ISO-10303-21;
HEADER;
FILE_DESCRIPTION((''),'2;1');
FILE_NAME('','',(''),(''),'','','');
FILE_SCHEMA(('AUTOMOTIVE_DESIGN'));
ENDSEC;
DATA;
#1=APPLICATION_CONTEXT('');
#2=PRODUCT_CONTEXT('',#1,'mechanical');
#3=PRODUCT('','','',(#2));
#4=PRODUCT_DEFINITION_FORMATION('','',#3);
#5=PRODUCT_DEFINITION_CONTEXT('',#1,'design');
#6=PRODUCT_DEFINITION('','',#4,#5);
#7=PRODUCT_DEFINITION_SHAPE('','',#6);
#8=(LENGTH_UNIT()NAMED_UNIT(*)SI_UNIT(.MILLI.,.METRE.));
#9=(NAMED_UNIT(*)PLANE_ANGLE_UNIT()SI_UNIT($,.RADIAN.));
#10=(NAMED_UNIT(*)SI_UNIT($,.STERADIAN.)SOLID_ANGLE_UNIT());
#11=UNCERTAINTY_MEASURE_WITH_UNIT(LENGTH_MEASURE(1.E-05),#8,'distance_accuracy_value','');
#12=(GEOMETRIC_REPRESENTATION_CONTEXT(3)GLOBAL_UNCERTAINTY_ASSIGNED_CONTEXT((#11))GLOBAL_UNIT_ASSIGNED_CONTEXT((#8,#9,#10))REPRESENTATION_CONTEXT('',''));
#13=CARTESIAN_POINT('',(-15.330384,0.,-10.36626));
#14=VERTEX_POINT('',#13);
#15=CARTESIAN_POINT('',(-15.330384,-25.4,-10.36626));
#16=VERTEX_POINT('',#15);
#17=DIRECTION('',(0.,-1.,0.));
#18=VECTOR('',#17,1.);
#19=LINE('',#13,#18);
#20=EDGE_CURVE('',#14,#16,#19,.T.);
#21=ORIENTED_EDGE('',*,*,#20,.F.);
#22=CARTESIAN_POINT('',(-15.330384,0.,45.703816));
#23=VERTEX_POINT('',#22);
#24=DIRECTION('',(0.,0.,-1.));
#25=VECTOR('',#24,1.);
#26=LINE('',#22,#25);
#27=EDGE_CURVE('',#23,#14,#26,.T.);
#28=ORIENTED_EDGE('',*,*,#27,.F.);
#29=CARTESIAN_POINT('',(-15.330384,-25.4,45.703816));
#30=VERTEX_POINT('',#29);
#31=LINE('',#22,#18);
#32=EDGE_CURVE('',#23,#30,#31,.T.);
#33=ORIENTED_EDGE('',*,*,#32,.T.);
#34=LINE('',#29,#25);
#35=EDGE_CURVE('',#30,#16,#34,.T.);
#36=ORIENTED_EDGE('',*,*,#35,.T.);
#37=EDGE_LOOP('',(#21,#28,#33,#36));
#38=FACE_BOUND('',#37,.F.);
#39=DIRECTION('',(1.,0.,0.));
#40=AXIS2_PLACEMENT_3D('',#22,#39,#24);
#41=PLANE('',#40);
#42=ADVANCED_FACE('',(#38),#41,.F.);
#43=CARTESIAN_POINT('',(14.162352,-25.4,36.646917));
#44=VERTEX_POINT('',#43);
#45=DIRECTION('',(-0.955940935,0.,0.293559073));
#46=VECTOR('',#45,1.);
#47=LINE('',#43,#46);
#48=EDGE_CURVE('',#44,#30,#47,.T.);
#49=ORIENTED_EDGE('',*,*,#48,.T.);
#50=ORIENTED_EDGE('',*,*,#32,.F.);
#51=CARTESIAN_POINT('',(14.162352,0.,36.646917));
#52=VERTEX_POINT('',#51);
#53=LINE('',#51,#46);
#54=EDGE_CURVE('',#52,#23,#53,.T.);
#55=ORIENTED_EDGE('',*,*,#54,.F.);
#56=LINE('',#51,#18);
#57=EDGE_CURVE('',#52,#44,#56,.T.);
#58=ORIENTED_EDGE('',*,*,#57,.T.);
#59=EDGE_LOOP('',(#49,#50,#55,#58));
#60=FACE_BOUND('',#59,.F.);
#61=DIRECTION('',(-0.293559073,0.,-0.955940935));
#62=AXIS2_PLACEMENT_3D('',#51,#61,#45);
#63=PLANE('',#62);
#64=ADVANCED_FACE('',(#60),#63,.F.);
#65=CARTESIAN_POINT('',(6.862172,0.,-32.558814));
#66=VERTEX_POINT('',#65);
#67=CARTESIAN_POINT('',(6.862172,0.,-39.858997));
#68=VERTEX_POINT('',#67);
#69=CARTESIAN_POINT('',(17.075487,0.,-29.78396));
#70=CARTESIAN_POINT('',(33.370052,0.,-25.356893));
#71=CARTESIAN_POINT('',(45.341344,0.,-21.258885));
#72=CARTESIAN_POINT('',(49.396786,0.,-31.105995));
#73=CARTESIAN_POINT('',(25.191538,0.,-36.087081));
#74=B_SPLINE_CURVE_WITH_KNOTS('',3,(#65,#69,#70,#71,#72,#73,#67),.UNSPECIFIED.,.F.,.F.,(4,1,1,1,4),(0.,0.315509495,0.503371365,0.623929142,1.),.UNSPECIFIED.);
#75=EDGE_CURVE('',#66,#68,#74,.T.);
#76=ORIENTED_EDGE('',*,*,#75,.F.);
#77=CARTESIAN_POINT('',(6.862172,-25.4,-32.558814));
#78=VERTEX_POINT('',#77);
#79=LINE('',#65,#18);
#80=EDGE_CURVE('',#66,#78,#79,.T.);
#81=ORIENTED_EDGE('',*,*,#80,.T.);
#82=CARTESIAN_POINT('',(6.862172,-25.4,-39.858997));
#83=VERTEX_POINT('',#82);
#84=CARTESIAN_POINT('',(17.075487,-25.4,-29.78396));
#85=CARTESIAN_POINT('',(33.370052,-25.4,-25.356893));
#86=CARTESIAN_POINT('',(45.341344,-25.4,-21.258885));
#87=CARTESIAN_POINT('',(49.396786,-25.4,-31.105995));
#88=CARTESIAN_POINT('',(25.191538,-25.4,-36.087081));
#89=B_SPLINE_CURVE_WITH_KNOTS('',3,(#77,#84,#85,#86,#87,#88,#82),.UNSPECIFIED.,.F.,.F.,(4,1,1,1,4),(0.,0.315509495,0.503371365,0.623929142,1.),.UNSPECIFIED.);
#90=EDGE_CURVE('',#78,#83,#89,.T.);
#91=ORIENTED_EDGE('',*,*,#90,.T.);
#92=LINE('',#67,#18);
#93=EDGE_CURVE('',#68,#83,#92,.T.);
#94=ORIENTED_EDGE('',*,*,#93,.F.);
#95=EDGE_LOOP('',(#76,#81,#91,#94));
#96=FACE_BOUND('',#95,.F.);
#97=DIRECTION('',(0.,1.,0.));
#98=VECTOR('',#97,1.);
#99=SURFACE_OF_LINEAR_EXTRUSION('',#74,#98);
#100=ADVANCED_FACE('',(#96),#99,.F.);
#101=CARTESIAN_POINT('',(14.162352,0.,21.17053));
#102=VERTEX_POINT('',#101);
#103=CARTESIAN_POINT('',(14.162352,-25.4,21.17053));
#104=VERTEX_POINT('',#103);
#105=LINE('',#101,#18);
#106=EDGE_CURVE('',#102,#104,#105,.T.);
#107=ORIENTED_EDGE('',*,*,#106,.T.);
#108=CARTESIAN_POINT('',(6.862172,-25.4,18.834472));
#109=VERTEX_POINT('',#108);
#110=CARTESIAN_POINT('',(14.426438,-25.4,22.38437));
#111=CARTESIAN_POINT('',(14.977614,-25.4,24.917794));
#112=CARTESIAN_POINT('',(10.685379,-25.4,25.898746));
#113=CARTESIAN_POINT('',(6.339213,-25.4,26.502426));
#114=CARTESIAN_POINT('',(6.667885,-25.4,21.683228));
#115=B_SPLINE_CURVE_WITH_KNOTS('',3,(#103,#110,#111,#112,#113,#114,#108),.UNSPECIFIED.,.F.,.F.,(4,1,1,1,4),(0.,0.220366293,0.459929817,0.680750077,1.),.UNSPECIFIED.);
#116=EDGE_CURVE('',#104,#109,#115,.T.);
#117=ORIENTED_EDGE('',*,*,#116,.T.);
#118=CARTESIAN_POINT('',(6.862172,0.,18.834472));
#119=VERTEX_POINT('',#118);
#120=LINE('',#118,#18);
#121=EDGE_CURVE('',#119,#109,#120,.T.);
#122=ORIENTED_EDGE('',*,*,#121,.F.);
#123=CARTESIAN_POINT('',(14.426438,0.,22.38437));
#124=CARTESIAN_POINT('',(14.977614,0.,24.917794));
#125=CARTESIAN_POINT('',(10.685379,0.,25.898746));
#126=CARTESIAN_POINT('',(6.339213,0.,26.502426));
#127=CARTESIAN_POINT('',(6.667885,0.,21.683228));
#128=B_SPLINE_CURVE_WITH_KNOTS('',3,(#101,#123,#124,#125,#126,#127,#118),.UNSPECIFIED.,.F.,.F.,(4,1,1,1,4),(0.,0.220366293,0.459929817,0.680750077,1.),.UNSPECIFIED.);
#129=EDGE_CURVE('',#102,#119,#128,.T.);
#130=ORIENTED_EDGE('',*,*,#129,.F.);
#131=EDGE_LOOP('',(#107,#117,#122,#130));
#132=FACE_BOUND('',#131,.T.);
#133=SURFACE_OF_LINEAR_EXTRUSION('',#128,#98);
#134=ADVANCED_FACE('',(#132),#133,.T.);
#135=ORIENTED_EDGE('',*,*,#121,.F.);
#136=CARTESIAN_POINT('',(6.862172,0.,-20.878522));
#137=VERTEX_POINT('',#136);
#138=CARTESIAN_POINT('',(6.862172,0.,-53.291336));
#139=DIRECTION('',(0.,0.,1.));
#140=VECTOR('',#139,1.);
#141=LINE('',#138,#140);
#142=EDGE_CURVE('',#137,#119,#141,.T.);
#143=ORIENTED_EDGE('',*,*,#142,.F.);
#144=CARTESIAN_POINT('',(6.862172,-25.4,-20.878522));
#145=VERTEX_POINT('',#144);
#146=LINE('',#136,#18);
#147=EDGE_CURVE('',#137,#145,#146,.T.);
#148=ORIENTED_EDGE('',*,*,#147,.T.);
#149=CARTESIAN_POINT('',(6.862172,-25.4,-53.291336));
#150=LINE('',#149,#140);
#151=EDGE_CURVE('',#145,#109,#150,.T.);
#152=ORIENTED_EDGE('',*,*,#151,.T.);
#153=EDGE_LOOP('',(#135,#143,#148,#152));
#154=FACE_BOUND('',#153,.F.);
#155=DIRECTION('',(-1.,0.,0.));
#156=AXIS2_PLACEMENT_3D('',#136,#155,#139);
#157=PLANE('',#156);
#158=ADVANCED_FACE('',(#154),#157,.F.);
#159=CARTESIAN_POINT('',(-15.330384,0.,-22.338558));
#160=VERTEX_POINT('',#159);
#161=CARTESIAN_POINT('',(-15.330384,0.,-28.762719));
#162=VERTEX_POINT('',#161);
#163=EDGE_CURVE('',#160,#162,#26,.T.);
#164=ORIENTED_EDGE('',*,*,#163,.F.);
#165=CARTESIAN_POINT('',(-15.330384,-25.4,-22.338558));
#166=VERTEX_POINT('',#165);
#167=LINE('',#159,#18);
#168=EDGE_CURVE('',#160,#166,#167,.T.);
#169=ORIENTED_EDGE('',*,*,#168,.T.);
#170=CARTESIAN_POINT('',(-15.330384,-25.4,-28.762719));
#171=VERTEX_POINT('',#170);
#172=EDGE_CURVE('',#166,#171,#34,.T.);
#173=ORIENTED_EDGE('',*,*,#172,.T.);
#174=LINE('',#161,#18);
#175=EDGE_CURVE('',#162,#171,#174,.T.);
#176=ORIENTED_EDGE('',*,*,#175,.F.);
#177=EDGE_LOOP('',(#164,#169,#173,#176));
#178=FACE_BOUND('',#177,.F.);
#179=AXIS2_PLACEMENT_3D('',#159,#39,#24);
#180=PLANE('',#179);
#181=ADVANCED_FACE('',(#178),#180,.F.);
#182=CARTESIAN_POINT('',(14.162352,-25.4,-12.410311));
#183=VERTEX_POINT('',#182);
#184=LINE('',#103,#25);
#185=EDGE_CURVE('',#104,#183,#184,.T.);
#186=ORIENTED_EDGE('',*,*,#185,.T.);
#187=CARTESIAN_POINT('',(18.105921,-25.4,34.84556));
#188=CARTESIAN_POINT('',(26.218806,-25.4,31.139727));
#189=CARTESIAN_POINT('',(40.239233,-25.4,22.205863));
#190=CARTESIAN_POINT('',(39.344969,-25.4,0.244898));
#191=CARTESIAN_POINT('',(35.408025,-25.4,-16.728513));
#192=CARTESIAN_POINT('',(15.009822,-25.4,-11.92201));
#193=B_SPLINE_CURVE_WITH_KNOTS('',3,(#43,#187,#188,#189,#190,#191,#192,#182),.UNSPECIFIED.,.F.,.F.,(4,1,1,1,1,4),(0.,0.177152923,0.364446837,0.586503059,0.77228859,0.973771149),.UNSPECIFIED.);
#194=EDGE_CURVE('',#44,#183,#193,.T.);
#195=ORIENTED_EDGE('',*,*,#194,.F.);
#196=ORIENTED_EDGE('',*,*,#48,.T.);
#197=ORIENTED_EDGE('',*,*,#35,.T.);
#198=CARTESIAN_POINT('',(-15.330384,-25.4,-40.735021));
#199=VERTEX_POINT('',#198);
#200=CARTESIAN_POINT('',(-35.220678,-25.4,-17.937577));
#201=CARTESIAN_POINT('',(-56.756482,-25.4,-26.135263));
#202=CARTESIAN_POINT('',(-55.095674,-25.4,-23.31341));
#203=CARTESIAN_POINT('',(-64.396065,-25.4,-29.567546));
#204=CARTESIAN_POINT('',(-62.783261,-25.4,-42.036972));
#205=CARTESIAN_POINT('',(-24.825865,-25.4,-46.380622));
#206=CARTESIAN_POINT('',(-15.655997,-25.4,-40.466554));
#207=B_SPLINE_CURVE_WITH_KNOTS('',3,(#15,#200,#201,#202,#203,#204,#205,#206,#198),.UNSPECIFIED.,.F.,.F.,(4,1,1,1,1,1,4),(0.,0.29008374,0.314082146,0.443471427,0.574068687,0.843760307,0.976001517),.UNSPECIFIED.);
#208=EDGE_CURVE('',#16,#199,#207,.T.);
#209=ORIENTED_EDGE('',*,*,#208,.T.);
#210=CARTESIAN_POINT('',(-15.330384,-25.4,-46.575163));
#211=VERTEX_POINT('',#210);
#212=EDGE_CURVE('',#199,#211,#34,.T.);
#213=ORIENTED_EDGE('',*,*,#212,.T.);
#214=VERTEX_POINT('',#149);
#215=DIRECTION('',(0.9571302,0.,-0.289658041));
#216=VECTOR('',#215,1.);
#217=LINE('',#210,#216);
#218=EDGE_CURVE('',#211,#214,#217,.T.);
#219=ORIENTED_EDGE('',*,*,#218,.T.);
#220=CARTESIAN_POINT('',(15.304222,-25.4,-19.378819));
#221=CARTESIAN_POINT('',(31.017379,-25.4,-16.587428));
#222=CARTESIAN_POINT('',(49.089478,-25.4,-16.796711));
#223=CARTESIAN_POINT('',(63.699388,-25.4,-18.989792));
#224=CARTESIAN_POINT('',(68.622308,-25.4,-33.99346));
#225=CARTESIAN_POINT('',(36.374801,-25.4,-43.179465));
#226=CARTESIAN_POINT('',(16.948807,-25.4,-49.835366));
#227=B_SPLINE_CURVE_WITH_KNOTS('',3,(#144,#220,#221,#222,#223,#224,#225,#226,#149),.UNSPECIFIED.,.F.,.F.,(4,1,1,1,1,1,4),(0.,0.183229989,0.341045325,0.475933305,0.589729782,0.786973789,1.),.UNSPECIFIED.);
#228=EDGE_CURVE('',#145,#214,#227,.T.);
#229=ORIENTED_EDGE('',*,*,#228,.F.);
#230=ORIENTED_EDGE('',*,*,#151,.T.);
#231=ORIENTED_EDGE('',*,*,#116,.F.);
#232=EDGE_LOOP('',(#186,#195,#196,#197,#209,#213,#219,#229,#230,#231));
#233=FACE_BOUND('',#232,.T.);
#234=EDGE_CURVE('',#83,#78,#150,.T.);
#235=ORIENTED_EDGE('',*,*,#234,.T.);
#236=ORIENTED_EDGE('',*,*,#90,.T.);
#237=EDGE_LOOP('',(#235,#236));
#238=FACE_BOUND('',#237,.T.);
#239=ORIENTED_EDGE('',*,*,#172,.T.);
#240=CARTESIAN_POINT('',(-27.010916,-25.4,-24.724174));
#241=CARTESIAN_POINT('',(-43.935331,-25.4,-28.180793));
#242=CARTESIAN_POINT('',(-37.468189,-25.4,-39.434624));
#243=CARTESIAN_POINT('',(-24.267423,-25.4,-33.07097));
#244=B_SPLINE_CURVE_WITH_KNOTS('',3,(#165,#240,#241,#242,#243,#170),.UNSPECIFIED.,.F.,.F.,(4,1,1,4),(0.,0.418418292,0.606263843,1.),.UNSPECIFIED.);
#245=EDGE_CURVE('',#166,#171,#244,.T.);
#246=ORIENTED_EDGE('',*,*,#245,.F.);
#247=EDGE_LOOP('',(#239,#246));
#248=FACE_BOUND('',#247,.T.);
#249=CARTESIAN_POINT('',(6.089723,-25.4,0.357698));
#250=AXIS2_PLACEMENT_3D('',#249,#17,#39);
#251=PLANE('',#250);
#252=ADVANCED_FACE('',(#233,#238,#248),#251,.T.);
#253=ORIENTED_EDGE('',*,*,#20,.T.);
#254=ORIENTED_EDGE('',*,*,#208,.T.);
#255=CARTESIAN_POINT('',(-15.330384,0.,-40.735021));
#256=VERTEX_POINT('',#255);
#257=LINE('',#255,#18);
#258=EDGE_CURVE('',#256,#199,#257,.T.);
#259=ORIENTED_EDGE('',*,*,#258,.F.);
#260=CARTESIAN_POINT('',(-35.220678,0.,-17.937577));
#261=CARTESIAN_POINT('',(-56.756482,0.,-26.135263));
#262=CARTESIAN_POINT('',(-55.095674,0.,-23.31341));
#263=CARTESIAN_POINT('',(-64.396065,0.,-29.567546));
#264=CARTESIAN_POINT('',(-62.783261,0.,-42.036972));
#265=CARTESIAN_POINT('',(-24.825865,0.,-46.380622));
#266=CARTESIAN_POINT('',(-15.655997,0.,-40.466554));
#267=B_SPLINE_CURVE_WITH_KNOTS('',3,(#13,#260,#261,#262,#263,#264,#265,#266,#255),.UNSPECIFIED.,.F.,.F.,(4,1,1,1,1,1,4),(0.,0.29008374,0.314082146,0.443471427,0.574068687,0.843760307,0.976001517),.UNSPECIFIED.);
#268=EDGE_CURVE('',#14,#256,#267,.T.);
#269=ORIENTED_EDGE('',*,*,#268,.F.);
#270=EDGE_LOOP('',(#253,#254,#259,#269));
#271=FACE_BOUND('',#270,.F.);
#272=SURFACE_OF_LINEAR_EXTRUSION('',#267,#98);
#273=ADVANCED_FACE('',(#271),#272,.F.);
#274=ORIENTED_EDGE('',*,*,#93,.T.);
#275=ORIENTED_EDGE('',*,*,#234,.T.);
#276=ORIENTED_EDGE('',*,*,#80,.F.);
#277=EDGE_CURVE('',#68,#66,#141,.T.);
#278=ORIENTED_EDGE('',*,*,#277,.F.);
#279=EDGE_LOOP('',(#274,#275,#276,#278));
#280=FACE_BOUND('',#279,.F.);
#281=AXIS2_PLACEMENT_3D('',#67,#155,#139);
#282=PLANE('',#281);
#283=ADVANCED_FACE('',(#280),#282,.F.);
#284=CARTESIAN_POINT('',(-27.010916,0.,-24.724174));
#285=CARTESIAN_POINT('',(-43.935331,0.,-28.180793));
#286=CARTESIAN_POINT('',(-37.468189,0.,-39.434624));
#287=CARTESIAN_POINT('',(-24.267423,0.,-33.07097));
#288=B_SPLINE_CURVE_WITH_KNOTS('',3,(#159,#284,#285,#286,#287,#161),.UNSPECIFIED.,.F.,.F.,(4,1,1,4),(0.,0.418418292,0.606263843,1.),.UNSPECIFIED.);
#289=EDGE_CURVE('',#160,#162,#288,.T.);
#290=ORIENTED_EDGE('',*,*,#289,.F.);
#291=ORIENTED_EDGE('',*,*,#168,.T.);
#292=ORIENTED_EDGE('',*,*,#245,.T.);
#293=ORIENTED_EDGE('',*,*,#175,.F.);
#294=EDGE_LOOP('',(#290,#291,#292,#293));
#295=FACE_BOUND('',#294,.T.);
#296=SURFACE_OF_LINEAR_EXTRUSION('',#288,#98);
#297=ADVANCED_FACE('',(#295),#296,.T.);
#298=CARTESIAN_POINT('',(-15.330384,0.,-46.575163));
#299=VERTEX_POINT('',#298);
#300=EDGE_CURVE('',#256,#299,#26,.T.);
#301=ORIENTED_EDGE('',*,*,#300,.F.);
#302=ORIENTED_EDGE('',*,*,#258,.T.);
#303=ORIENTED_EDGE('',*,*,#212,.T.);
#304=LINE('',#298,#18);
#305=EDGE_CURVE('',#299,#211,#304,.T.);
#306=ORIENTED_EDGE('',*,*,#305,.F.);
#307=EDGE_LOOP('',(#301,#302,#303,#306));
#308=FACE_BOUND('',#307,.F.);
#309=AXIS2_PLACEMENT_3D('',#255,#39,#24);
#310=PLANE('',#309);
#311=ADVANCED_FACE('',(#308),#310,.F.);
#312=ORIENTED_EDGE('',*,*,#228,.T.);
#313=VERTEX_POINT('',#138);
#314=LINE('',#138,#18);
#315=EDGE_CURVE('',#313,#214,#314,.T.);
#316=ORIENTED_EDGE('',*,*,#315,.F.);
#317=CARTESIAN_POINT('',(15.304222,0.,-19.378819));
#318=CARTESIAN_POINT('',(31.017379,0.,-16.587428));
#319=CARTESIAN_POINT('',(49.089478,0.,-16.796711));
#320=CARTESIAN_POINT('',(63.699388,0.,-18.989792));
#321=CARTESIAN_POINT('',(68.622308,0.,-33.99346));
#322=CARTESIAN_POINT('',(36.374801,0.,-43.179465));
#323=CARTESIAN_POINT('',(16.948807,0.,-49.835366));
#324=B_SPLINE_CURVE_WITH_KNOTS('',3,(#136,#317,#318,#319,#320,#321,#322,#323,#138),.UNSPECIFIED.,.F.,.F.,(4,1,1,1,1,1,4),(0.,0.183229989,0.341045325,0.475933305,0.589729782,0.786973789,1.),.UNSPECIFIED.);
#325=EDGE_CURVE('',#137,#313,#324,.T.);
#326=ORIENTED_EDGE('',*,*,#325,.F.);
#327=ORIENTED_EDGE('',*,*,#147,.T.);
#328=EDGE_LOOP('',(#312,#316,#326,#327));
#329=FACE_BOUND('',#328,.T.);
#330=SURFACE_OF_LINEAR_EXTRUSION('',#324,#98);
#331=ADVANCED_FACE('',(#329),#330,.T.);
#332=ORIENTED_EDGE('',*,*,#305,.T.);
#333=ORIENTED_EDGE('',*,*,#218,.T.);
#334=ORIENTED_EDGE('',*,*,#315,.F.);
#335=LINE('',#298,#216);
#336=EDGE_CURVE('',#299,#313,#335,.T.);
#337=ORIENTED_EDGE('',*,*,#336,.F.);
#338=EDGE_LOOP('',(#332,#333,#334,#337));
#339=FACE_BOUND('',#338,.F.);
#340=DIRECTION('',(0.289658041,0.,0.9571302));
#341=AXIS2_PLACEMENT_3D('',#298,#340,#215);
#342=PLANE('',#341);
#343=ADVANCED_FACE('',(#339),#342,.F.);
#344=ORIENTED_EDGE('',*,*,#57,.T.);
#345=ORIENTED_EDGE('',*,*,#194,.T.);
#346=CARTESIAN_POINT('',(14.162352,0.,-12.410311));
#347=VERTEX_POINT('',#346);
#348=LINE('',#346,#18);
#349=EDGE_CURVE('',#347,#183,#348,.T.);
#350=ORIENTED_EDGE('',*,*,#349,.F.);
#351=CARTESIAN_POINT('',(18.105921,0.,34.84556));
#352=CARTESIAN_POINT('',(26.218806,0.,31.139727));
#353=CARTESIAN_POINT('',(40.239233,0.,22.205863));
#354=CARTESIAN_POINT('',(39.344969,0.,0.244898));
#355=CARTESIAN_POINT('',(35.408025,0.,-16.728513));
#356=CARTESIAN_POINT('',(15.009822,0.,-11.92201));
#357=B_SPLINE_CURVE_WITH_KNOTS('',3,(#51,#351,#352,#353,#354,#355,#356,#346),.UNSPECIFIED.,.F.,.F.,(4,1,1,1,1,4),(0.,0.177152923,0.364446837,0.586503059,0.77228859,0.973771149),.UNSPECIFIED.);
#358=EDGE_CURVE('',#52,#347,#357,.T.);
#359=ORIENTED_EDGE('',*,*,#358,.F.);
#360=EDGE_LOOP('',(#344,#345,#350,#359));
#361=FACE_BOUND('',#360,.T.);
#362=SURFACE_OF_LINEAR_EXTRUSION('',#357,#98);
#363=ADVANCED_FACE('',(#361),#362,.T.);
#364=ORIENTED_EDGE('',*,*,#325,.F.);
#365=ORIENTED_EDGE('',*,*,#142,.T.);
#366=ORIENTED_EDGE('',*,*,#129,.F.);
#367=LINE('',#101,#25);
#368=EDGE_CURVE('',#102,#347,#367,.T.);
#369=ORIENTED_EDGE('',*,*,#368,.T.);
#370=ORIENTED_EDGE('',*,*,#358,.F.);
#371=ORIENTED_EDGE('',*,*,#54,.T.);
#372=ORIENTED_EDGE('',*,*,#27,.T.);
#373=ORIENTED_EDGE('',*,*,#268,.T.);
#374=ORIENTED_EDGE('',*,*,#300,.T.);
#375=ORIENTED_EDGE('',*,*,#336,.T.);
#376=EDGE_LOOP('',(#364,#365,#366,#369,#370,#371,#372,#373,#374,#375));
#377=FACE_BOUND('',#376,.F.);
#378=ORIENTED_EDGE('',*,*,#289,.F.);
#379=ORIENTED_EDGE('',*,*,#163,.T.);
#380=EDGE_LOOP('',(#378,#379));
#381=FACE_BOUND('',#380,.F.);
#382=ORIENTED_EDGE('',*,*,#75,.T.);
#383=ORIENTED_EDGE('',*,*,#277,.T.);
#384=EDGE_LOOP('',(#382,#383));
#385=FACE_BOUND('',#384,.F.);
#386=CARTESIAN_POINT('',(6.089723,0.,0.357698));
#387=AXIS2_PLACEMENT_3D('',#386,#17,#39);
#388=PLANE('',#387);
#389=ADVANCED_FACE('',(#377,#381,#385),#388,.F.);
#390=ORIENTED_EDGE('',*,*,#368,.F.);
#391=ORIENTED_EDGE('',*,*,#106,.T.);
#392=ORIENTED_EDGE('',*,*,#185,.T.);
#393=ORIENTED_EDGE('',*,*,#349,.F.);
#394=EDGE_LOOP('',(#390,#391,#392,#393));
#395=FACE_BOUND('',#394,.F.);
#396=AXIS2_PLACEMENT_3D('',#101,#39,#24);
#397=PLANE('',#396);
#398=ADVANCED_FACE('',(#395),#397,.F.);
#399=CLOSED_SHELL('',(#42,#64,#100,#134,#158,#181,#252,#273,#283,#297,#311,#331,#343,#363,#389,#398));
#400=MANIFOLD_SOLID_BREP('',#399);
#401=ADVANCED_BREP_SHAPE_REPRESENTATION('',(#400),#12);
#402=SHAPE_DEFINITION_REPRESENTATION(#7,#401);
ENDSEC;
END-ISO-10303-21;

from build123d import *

# Parameters (mm, degrees)
F1_DEPTH = 25.4


with BuildPart() as f1:
    # F0 (on Front) → F1 (new body)
    with BuildSketch(Plane.XZ):
        with BuildLine():
            Line((-15.3303835541, -41.0270281136), (-15.3303835541, -46.5751625597))
            Line((-15.3303835541, -46.5751625597), (6.8621719256, -53.2913357019))
            Line((6.8621719256, -53.2913357019), (6.8621719256, -39.8589968681))
            Line((6.8621719256, -39.8589968681), (6.8621719256, -32.5588136911))
            Line((6.8621719256, -32.5588136911), (6.8621719256, -20.8785217255))
            Line((6.8621719256, -20.8785217255), (6.8621719256, 18.8344717026))
            add(Edge.make_bspline(
                [(14.1623523086, 21.1705304682), (14.4264375928, 22.3843703264), (14.9776139766, 24.917793821), (10.6853785059, 25.8987456687), (6.3392125116, 26.5024260876), (6.6678848939, 21.683228331), (6.8621719256, 18.8344717026)],
                knots=[0, 0, 0, 0, 0.220366293, 0.4599298172, 0.6807500769, 1, 1, 1, 1], degree=3))
            Line((14.1623523086, 21.1705304682), (14.1623523086, -12.4103110284))
            add(Edge.make_bspline(
                [(14.1623523086, 36.6469174623), (18.1059212038, 34.8455598925), (26.2188057649, 31.1397273318), (40.2392334697, 22.2058630586), (39.3449689326, 0.2448984557), (35.4080251913, -16.7285134667), (15.009821869, -11.9220096004), (14.1623523086, -12.4103110284)],
                knots=[0, 0, 0, 0, 0.1771529227, 0.3644468373, 0.5865030589, 0.7722885895, 0.9737711488, 0.9737711488, 0.9737711488, 0.9737711488], degree=3))
            Line((14.1623523086, 36.6469174623), (-15.3303835541, 45.7038161606))
            Line((-15.3303835541, 45.7038161606), (-15.3303835541, -10.3662600741))
            Line((-15.3303835541, -10.3662600741), (-15.3303835541, -22.3385579884))
            Line((-15.3303835541, -22.3385579884), (-15.3303835541, -28.7627186626))
            Line((-15.3303835541, -28.7627186626), (-15.3303835541, -40.7350212336))
            add(Edge.make_bspline(
                [(-15.3303835541, -40.7350212336), (-15.2712927491, -40.7837414321), (-15.3008381516, -40.9053847728), (-15.3303835541, -41.0270281136)],
                knots=[0.9760015175, 0.9760015175, 0.9760015175, 0.9760015175, 1, 1, 1, 1], degree=3))
        make_face()
        with BuildLine():
            Line((-15.3303835541, -40.7350212336), (-15.3303835541, -41.0270281136))
            add(Edge.make_bspline(
                [(-15.3303835541, -40.7350212336), (-15.2712927491, -40.7837414321), (-15.3008381516, -40.9053847728), (-15.3303835541, -41.0270281136)],
                knots=[0.9760015175, 0.9760015175, 0.9760015175, 0.9760015175, 1, 1, 1, 1], degree=3))
        make_face()
        with BuildLine():
            Line((6.8621719256, -39.8589968681), (6.8621719256, -53.2913357019))
            add(Edge.make_bspline(
                [(6.8621719256, -20.8785217255), (15.3042216434, -19.378819076), (31.0173786315, -16.5874278907), (49.0894784823, -16.7967105962), (63.6993881596, -18.9897924504), (68.6223083484, -33.9934598901), (36.3748012962, -43.1794652259), (16.9488069817, -49.8353661932), (6.8621719256, -53.2913357019)],
                knots=[0, 0, 0, 0, 0.1832299895, 0.3410453251, 0.4759333054, 0.5897297817, 0.7869737889, 1, 1, 1, 1], degree=3))
            Line((6.8621719256, -20.8785217255), (6.8621719256, -32.5588136911))
            add(Edge.make_bspline(
                [(6.8621719256, -32.5588136911), (17.075486717, -29.783960217), (33.370052461, -25.3568928752), (45.3413435566, -21.2588853056), (49.396785617, -31.105994635), (25.1915382166, -36.0870810059), (6.8621719256, -39.8589968681)],
                knots=[0, 0, 0, 0, 0.3155094949, 0.5033713649, 0.6239291418, 1, 1, 1, 1], degree=3))
        make_face()
        with BuildLine():
            add(Edge.make_bspline(
                [(-15.3303835541, -10.3662600741), (-35.2206782898, -17.9375768513), (-56.7564818958, -26.1352628746), (-55.0956742109, -23.3134101991), (-64.396064605, -29.5675464926), (-62.7832606242, -42.0369715173), (-24.8258652624, -46.3806221426), (-15.6559974585, -40.4665535073), (-15.3303835541, -40.7350212336)],
                knots=[0, 0, 0, 0, 0.2900837403, 0.3140821462, 0.443471427, 0.5740686868, 0.843760307, 0.9760015175, 0.9760015175, 0.9760015175, 0.9760015175], degree=3))
            Line((-15.3303835541, -40.7350212336), (-15.3303835541, -28.7627186626))
            add(Edge.make_bspline(
                [(-15.3303835541, -22.3385579884), (-27.010916279, -24.7241738586), (-43.9353309171, -28.1807929276), (-37.4681885021, -39.4346237824), (-24.267423007, -33.070970421), (-15.3303835541, -28.7627186626)],
                knots=[0, 0, 0, 0, 0.4184182917, 0.6062638433, 1, 1, 1, 1], degree=3))
            Line((-15.3303835541, -22.3385579884), (-15.3303835541, -10.3662600741))
        make_face()
    extrude(amount=F1_DEPTH)


solid = f1.part
